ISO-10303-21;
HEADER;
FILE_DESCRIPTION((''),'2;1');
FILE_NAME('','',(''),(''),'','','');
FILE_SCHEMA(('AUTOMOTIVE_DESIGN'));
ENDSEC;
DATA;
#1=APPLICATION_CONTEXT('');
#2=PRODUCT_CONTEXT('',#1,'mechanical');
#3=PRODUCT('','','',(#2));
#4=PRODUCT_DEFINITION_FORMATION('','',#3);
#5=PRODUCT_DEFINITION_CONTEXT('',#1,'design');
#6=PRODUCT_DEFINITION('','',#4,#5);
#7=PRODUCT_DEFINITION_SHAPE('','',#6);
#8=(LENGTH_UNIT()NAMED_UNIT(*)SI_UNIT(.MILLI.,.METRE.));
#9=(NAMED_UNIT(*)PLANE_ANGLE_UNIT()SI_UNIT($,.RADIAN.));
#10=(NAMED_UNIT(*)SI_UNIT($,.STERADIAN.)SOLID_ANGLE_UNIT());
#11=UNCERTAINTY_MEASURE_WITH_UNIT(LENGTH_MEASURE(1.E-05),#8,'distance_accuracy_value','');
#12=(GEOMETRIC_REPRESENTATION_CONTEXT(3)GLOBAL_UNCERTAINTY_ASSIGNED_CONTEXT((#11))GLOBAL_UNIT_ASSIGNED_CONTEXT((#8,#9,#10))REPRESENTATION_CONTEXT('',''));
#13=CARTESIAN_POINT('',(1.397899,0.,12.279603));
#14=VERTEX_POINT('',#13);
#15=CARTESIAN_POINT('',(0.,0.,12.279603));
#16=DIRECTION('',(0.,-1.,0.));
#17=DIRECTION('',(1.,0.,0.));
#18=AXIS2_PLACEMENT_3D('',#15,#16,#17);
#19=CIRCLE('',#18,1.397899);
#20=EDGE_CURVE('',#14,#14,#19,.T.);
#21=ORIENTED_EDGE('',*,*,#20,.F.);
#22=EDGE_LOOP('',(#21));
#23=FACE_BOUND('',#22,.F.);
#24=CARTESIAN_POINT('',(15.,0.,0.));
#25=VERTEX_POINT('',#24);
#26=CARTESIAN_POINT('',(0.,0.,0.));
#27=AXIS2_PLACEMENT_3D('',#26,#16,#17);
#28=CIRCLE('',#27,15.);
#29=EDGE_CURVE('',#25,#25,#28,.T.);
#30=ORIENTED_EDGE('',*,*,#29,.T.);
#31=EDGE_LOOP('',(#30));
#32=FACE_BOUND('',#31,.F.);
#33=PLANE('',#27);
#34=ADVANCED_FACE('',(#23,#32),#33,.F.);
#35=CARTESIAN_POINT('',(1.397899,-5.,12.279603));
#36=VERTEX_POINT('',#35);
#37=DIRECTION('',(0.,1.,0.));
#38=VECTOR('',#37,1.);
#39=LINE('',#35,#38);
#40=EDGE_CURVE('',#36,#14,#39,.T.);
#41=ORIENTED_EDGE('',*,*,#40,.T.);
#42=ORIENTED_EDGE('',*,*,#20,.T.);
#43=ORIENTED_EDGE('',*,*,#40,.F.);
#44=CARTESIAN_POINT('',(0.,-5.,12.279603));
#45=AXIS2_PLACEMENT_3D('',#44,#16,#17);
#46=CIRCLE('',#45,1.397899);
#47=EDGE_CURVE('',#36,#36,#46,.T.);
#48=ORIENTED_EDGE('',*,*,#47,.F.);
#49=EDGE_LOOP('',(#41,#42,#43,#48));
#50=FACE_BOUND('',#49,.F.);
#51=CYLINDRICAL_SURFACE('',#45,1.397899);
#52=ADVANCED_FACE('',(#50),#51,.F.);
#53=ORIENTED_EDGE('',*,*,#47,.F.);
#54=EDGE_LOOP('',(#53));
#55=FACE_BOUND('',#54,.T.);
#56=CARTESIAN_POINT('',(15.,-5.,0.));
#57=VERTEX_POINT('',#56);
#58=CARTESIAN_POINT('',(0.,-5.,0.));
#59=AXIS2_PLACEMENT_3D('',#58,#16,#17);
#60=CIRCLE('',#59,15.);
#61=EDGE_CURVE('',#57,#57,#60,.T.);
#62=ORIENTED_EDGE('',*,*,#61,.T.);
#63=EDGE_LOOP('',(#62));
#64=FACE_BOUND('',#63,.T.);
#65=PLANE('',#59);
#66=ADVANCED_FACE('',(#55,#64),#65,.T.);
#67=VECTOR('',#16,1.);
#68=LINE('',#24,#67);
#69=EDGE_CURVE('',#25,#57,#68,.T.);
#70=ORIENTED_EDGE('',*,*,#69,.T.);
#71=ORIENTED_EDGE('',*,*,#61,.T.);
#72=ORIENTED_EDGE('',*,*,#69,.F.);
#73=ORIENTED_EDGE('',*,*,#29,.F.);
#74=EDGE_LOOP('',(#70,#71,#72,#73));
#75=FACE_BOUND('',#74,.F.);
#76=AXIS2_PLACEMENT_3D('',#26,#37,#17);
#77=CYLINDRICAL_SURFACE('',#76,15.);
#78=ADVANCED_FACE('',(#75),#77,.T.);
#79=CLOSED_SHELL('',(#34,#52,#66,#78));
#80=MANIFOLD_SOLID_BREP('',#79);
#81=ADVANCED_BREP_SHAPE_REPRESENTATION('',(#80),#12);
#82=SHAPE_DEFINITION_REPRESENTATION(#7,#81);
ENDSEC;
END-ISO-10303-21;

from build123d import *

# Parameters (mm, degrees)
F0_R     = 15
F1_DEPTH = 5
F2_R     = 1.3978994536
F3_DEPTH = 5


# Not quite as in the source:
# - a feature names something its author has since deleted; it is built from what else it names


with BuildPart() as f1:
    # F0 (on Front) → F1 (new body)
    with BuildSketch(Plane.XZ):
        Circle(F0_R)
    extrude(amount=F1_DEPTH)

    # F2 (on face) → F3 (cut)
    with BuildSketch(Plane.XZ.offset(5)):
        with Locations((0, 12.279602699)):
            Circle(F2_R)
    extrude(amount=-F3_DEPTH, mode=Mode.SUBTRACT)


solid = f1.part
